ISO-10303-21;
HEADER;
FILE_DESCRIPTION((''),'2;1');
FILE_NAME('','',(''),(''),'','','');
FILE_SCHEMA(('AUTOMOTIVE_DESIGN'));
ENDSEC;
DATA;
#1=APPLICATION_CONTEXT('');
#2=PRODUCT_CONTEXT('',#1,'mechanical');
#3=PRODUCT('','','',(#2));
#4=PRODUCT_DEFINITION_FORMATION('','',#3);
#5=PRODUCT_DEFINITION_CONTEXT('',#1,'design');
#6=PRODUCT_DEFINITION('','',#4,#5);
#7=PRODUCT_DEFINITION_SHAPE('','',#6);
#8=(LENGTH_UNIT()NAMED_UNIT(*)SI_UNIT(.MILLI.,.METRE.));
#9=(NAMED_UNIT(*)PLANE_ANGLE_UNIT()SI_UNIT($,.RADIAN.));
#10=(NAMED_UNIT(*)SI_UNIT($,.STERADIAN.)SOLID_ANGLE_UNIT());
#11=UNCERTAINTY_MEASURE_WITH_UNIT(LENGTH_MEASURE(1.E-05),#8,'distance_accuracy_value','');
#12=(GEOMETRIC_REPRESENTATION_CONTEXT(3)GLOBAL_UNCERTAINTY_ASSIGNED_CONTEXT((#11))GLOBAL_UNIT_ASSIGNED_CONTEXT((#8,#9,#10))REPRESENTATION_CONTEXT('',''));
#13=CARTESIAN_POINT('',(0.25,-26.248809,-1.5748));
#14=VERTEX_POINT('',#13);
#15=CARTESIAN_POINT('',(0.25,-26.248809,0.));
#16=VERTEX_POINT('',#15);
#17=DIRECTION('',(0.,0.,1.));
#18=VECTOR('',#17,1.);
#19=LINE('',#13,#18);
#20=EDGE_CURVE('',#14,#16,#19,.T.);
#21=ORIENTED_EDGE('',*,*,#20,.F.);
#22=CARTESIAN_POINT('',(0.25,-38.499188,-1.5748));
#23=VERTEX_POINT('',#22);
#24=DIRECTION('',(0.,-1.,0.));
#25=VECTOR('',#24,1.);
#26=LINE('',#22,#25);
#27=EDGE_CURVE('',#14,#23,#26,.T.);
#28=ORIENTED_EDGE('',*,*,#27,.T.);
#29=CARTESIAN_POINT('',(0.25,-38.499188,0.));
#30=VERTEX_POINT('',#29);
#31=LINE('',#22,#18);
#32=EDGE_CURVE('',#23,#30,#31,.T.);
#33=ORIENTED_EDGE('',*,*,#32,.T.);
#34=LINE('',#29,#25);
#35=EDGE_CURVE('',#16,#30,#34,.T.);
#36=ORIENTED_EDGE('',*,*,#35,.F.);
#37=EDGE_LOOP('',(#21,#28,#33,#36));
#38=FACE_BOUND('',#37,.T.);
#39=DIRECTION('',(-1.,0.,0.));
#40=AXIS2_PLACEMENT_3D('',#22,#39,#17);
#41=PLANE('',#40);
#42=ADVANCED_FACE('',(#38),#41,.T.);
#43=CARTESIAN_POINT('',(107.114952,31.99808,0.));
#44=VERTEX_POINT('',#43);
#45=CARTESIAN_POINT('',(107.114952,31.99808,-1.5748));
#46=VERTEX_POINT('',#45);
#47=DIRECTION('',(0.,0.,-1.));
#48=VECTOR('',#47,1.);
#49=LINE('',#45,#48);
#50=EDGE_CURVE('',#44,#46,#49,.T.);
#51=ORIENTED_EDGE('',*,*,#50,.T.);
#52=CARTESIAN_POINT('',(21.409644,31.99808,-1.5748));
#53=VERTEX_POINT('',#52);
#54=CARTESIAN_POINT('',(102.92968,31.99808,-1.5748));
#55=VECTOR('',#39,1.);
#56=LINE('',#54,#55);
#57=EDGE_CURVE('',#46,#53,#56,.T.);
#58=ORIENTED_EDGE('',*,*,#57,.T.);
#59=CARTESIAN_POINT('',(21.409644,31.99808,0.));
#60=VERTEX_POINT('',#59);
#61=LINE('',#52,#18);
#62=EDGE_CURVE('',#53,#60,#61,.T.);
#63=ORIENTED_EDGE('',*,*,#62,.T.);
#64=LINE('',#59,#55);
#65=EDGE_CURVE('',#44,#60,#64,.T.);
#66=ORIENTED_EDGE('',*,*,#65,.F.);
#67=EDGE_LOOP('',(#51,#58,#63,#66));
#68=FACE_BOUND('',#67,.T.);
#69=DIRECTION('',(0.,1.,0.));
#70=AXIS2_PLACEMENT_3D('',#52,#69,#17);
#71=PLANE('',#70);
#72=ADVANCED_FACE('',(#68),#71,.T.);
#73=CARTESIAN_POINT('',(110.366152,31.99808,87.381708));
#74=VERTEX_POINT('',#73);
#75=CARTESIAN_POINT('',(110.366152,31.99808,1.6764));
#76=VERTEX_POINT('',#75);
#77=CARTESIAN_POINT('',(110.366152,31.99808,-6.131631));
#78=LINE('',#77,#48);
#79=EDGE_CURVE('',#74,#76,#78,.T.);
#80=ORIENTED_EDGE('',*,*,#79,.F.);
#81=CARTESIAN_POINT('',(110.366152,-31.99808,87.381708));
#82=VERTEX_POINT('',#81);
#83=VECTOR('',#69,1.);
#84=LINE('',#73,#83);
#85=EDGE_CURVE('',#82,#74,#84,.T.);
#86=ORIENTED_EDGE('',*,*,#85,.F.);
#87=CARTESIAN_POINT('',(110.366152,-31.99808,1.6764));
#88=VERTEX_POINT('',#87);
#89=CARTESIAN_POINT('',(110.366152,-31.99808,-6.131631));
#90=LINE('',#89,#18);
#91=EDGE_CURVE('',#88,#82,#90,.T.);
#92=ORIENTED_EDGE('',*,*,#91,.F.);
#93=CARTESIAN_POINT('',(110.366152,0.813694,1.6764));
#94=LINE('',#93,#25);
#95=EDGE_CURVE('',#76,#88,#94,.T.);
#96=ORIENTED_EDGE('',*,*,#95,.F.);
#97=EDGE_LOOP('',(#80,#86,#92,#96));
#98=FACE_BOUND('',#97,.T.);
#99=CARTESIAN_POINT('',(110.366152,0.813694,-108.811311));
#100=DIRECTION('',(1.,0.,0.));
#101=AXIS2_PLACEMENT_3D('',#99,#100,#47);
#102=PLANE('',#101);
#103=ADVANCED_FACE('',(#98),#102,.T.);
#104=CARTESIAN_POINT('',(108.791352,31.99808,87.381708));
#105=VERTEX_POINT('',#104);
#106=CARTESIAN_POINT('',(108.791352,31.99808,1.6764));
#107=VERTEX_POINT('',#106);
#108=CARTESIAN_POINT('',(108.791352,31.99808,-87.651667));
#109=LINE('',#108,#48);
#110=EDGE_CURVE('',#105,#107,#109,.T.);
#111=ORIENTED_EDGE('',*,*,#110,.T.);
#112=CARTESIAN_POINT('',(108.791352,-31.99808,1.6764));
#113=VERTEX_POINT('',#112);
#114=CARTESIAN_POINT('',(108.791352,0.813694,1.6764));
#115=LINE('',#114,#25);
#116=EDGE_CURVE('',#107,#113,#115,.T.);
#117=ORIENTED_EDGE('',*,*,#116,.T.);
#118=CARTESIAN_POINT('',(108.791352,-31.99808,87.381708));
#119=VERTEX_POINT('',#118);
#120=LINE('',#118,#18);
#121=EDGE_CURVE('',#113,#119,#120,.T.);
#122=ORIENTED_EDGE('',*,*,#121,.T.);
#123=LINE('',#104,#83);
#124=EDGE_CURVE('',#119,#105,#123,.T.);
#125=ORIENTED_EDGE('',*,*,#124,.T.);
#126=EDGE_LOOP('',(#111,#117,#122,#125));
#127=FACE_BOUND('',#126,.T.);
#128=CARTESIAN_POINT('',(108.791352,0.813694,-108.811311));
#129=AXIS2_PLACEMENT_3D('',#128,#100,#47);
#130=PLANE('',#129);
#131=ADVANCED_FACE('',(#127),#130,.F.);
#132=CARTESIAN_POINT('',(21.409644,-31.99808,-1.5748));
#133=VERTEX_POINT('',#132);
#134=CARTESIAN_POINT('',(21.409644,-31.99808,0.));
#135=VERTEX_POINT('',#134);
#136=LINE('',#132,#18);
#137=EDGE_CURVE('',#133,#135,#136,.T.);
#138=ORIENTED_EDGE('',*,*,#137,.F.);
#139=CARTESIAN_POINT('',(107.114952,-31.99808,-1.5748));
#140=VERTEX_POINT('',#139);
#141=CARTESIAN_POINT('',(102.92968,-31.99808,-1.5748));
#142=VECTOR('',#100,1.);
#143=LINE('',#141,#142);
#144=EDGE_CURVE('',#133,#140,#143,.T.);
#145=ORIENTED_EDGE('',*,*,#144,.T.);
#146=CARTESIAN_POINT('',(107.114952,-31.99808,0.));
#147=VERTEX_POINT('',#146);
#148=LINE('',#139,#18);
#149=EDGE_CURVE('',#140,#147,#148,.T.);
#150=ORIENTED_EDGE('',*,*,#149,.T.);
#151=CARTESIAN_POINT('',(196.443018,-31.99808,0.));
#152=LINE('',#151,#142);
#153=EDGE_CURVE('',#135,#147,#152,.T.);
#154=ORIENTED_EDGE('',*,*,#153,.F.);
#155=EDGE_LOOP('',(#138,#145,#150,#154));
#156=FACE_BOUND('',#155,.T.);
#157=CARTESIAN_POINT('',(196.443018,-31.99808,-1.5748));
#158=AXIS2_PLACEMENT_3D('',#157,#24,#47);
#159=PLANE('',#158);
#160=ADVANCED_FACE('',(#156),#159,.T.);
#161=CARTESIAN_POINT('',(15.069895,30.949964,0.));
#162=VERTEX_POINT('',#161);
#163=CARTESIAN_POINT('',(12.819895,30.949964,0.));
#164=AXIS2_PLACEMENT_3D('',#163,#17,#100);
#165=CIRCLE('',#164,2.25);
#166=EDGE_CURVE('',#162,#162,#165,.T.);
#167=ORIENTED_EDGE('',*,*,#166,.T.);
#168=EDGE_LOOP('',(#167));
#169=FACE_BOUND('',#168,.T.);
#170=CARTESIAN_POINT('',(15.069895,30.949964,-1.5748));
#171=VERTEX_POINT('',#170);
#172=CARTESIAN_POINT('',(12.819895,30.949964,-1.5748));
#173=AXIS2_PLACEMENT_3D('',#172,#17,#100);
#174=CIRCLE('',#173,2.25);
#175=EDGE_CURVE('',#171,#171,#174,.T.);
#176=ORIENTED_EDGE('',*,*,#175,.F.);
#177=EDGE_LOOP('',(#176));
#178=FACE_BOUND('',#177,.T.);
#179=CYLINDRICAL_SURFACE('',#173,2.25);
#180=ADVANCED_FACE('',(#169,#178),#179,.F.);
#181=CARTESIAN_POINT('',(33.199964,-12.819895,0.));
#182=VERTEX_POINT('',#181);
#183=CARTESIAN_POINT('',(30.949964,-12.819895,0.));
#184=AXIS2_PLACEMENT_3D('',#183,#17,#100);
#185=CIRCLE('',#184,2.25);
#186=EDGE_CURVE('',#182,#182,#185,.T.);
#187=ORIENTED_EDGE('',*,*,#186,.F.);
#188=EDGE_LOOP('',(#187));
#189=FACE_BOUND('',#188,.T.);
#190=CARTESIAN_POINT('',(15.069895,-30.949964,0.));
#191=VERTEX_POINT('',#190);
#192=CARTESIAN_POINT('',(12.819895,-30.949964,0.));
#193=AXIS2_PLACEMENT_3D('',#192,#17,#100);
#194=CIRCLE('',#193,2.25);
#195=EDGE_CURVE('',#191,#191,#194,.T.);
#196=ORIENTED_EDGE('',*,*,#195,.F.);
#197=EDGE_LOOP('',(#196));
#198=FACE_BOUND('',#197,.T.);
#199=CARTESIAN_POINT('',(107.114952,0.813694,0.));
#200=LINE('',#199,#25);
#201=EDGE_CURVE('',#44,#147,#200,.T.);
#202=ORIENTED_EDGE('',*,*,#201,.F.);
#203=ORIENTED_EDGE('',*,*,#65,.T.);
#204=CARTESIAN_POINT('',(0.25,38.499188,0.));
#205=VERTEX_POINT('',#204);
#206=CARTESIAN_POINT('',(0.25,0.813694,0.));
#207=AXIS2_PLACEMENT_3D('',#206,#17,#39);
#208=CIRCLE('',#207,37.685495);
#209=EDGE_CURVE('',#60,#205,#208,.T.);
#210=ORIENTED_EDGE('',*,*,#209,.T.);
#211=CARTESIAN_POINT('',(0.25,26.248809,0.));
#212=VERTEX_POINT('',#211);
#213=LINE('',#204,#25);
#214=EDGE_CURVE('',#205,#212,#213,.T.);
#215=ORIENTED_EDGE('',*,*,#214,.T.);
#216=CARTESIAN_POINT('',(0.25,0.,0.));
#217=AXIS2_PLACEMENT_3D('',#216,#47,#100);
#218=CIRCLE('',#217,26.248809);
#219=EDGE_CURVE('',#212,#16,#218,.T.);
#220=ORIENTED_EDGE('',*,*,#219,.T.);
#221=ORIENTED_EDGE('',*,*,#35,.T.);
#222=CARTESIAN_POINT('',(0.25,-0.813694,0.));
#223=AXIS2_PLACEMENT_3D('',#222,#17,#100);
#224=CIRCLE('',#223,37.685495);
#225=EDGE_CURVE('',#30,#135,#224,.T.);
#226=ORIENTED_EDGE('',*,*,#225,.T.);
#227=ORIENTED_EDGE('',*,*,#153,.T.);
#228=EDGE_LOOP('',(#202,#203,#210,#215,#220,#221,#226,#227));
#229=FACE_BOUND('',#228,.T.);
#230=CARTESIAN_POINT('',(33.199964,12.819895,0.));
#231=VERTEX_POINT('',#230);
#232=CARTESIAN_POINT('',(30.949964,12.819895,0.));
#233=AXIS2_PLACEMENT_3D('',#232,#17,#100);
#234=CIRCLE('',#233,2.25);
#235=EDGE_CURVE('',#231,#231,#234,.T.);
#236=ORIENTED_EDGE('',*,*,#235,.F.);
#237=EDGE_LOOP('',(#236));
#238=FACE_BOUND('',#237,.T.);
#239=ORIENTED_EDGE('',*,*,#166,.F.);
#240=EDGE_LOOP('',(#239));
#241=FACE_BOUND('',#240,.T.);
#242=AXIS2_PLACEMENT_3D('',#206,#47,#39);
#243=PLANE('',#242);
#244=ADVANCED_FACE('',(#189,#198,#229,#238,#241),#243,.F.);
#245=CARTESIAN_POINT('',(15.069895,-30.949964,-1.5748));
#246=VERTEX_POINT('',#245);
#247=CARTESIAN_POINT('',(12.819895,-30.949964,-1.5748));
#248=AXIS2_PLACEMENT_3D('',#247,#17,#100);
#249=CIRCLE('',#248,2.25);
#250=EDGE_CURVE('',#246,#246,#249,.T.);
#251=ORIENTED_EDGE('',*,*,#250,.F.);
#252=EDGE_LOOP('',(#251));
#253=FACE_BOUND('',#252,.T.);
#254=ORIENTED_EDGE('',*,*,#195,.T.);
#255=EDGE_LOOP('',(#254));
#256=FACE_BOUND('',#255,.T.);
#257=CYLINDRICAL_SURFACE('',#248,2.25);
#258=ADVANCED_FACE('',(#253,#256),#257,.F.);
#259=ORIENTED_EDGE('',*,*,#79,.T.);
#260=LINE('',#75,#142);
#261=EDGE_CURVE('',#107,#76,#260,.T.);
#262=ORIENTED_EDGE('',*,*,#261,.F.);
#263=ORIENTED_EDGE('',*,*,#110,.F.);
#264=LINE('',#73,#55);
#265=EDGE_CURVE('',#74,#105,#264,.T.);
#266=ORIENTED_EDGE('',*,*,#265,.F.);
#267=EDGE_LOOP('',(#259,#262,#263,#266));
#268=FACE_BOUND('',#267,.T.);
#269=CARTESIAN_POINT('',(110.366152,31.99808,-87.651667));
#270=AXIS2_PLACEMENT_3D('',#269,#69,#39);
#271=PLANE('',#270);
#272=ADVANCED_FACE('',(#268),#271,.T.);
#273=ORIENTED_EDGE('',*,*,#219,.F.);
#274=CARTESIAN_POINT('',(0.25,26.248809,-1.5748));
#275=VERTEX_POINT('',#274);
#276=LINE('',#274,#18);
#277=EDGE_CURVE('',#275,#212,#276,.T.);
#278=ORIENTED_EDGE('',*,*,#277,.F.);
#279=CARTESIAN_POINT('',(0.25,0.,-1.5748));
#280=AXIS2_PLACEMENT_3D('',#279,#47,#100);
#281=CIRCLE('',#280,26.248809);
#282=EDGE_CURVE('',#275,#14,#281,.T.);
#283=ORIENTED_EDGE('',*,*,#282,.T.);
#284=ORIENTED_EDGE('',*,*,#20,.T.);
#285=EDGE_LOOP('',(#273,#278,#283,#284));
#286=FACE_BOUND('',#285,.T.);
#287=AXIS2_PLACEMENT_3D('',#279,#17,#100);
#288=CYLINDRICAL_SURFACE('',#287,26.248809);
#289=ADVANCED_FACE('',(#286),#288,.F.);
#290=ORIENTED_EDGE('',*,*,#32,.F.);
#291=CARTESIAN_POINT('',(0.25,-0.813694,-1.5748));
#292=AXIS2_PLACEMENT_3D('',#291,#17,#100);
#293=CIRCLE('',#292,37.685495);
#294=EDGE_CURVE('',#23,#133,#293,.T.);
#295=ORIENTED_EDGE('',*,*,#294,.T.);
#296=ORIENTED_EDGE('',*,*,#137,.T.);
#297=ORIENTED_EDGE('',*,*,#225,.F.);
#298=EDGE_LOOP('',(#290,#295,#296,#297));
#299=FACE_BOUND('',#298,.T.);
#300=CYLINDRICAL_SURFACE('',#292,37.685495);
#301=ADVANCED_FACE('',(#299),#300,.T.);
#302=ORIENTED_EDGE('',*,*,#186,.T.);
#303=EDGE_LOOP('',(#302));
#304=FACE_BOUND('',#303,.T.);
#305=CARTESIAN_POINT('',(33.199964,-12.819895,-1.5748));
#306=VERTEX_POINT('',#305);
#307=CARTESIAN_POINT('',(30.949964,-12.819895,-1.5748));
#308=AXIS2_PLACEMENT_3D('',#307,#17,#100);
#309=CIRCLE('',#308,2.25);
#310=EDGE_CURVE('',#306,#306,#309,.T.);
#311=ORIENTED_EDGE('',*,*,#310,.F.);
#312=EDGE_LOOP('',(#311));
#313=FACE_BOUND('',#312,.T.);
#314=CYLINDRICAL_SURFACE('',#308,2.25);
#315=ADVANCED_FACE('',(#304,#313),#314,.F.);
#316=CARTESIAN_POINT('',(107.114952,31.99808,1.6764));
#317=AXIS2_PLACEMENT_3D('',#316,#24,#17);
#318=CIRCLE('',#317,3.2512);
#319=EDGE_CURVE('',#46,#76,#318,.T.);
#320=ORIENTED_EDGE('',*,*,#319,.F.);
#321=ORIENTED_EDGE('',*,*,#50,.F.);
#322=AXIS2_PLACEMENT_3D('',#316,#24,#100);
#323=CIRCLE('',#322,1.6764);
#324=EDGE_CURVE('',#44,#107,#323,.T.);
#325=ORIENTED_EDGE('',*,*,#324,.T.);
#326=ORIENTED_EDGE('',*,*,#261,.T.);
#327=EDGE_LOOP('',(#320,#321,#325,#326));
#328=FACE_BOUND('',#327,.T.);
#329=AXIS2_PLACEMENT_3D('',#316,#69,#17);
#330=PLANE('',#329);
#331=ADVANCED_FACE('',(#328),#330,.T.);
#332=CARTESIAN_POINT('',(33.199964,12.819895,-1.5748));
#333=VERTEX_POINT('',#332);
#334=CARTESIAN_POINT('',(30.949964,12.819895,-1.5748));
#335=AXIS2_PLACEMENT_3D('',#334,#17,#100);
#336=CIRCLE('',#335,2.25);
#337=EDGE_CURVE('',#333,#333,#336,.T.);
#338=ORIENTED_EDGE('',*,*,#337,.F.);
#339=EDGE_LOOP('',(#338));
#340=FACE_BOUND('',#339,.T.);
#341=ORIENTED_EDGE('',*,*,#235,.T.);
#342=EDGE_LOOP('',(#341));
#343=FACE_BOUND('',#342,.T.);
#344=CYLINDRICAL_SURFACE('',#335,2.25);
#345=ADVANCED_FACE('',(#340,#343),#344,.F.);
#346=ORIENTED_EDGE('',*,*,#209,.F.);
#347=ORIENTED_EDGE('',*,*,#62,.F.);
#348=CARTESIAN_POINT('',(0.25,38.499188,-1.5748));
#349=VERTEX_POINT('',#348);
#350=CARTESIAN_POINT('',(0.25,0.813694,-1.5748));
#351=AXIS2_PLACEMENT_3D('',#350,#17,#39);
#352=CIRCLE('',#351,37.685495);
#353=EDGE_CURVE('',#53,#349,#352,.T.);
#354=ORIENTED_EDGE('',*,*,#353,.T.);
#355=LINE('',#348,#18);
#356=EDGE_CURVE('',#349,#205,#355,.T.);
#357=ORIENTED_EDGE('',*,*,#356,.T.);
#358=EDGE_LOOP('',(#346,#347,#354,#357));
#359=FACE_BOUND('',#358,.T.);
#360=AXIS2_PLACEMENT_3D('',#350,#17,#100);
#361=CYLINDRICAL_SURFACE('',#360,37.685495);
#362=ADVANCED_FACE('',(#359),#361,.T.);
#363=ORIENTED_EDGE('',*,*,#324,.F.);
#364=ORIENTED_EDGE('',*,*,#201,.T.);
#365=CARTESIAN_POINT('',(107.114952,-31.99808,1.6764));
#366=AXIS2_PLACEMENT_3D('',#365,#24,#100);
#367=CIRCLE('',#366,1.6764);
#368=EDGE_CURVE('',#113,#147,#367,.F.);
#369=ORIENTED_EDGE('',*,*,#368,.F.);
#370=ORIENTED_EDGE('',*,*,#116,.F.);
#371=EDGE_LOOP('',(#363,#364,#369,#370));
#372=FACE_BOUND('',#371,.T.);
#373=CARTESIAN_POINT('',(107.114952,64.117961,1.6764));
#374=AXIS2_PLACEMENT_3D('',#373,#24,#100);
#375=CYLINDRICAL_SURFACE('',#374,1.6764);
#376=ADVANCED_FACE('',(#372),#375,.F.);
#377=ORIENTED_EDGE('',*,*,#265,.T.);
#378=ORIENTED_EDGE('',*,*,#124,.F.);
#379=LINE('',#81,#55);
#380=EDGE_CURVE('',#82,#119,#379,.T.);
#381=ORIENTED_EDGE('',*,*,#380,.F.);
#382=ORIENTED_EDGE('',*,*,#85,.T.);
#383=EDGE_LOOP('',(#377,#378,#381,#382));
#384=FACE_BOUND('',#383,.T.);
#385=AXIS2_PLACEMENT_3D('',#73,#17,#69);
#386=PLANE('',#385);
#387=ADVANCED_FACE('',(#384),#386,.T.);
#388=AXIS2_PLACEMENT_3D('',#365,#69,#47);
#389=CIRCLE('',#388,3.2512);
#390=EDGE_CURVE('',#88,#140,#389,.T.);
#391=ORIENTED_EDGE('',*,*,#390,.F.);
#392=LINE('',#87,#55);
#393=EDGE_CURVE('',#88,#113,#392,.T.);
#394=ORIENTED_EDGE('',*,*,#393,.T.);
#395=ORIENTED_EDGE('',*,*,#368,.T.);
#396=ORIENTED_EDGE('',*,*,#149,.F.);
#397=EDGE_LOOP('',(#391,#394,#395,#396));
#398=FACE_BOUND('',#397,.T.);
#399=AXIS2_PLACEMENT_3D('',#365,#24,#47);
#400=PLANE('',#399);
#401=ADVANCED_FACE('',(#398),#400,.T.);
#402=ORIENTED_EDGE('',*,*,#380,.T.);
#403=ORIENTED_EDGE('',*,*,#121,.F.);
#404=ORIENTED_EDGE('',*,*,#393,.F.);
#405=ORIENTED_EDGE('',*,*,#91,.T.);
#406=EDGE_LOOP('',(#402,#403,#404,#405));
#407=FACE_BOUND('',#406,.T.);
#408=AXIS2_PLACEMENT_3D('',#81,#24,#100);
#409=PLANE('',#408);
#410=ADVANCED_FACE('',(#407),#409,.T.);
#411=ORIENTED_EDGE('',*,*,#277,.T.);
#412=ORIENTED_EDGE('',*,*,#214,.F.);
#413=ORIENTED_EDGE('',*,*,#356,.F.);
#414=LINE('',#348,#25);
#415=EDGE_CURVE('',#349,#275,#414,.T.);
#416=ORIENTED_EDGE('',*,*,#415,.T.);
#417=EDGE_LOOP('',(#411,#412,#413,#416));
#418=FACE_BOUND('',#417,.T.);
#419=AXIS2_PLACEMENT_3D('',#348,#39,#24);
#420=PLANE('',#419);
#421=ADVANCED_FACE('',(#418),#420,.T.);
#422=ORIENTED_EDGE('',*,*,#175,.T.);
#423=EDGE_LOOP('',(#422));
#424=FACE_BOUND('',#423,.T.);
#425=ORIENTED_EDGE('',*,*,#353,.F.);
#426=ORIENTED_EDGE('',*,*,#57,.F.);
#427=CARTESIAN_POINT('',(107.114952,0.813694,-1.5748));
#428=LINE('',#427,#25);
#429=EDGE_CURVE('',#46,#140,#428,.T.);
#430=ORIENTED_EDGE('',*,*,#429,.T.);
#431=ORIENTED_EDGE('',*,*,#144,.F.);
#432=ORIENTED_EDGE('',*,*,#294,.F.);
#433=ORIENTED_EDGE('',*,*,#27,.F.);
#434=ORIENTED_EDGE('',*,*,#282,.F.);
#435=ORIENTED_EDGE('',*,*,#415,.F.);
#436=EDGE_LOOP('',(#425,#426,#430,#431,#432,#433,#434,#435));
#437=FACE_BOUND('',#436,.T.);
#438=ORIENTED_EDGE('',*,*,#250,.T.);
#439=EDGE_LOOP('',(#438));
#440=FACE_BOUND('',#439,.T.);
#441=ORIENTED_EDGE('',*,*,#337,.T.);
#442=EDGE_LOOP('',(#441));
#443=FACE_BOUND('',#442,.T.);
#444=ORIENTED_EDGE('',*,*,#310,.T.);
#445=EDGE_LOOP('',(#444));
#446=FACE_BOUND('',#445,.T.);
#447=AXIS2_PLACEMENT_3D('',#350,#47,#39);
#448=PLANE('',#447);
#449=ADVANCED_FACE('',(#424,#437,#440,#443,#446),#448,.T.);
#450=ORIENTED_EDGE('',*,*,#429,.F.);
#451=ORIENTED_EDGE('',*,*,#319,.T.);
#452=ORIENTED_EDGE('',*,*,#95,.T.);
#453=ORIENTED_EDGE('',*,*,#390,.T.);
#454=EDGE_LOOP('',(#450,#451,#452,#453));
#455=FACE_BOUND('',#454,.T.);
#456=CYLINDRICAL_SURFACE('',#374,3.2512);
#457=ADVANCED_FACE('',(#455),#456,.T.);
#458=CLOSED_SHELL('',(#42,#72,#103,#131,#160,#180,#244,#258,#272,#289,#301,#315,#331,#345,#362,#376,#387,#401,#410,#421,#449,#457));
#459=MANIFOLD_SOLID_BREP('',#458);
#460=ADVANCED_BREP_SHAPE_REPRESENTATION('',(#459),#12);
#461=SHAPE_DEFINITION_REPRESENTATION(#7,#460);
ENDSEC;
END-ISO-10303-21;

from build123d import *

# Parameters (mm, degrees)
SKETCH1_R              = 2.25
BASE_FLANGE1_DEPTH     = 1.5748
SKETCHED_START         = -31.998080115
SKETCHED_BEND1_DEPTH   = 63.99616023
SKETCHED_BEND1_2_DEPTH = 63.99616023


# Read off the part's stored shape, not the designer's step: Sketched Bend1
# Sheet-metal steps are written as plain solids
with BuildPart() as part:
    # Sketch1 → Base-Flange1 (new body)
    with BuildSketch(Plane.XY):
        with BuildLine():
            Line((0.25, 38.499188303), (0.25, 26.248809497))
            ThreePointArc((0.25, 26.248809497), (26.498809497, 0), (0.25, -26.248809497))
            Line((0.25, -26.248809497), (0.25, -38.499188303))
            ThreePointArc((0.25, -38.499188303), (11.317914827, -36.837266048), (21.409644298, -31.998080115))
            Line((21.409644298, -31.998080115), (102.929679939, -31.998080115))
            Line((102.929679939, -31.998080115), (196.443018387, -31.998080115))
            Line((196.443018387, -31.998080115), (196.443018387, 31.998080115))
            Line((196.443018387, 31.998080115), (102.929679939, 31.998080115))
            Line((102.929679939, 31.998080115), (21.409644298, 31.998080115))
            ThreePointArc((21.409644298, 31.998080115), (11.317914827, 36.837266048), (0.25, 38.499188303))
        make_face()
        with Locations((12.819894984, 30.949964339)):
            Circle(SKETCH1_R, mode=Mode.SUBTRACT)
        with Locations((30.949964339, 12.819894984)):
            Circle(SKETCH1_R, mode=Mode.SUBTRACT)
        with Locations((30.949964339, -12.819894984)):
            Circle(SKETCH1_R, mode=Mode.SUBTRACT)
        with Locations((12.819894984, -30.949964339)):
            Circle(SKETCH1_R, mode=Mode.SUBTRACT)
    extrude(amount=-BASE_FLANGE1_DEPTH)

    # Sketched Bend1 outline → Sketched Bend1 (cut)
    with BuildSketch(Plane(origin=(0, 0, 0), x_dir=(1, 0, 0), z_dir=(0, 1, 0)).offset(SKETCHED_START)):
        with BuildLine():
            ThreePointArc((107.11495185, 1.5748), (108.71495025, 1.153848498), (109.90062672, 0))
            Line((109.90062672, 0), (196.443018387, 0))
            Line((196.443018387, 0), (196.443018387, 1.5748))
            Line((196.443018387, 1.5748), (107.11495185, 1.5748))
        make_face()
    extrude(amount=SKETCHED_BEND1_DEPTH, mode=Mode.SUBTRACT)

    # Sketched Bend1 2 outline → Sketched Bend1 2 (add)
    with BuildSketch(Plane(origin=(0, 0, 0), x_dir=(1, 0, 0), z_dir=(0, 1, 0)).offset(SKETCHED_START)):
        with BuildLine():
            Line((108.79135185, -1.6764), (108.79135185, -87.381707553))
            Line((108.79135185, -87.381707553), (110.36615185, -87.381707553))
            Line((110.36615185, -87.381707553), (110.36615185, -1.6764))
            ThreePointArc((110.36615185, -1.6764), (110.247609474, -0.806481813), (109.90062672, 0))
            Line((109.90062672, 0), (107.11495185, 0))
            ThreePointArc((107.11495185, 0), (108.300345658, -0.491006192), (108.79135185, -1.6764))
        make_face()
    extrude(amount=SKETCHED_BEND1_2_DEPTH)


solid = part.part
